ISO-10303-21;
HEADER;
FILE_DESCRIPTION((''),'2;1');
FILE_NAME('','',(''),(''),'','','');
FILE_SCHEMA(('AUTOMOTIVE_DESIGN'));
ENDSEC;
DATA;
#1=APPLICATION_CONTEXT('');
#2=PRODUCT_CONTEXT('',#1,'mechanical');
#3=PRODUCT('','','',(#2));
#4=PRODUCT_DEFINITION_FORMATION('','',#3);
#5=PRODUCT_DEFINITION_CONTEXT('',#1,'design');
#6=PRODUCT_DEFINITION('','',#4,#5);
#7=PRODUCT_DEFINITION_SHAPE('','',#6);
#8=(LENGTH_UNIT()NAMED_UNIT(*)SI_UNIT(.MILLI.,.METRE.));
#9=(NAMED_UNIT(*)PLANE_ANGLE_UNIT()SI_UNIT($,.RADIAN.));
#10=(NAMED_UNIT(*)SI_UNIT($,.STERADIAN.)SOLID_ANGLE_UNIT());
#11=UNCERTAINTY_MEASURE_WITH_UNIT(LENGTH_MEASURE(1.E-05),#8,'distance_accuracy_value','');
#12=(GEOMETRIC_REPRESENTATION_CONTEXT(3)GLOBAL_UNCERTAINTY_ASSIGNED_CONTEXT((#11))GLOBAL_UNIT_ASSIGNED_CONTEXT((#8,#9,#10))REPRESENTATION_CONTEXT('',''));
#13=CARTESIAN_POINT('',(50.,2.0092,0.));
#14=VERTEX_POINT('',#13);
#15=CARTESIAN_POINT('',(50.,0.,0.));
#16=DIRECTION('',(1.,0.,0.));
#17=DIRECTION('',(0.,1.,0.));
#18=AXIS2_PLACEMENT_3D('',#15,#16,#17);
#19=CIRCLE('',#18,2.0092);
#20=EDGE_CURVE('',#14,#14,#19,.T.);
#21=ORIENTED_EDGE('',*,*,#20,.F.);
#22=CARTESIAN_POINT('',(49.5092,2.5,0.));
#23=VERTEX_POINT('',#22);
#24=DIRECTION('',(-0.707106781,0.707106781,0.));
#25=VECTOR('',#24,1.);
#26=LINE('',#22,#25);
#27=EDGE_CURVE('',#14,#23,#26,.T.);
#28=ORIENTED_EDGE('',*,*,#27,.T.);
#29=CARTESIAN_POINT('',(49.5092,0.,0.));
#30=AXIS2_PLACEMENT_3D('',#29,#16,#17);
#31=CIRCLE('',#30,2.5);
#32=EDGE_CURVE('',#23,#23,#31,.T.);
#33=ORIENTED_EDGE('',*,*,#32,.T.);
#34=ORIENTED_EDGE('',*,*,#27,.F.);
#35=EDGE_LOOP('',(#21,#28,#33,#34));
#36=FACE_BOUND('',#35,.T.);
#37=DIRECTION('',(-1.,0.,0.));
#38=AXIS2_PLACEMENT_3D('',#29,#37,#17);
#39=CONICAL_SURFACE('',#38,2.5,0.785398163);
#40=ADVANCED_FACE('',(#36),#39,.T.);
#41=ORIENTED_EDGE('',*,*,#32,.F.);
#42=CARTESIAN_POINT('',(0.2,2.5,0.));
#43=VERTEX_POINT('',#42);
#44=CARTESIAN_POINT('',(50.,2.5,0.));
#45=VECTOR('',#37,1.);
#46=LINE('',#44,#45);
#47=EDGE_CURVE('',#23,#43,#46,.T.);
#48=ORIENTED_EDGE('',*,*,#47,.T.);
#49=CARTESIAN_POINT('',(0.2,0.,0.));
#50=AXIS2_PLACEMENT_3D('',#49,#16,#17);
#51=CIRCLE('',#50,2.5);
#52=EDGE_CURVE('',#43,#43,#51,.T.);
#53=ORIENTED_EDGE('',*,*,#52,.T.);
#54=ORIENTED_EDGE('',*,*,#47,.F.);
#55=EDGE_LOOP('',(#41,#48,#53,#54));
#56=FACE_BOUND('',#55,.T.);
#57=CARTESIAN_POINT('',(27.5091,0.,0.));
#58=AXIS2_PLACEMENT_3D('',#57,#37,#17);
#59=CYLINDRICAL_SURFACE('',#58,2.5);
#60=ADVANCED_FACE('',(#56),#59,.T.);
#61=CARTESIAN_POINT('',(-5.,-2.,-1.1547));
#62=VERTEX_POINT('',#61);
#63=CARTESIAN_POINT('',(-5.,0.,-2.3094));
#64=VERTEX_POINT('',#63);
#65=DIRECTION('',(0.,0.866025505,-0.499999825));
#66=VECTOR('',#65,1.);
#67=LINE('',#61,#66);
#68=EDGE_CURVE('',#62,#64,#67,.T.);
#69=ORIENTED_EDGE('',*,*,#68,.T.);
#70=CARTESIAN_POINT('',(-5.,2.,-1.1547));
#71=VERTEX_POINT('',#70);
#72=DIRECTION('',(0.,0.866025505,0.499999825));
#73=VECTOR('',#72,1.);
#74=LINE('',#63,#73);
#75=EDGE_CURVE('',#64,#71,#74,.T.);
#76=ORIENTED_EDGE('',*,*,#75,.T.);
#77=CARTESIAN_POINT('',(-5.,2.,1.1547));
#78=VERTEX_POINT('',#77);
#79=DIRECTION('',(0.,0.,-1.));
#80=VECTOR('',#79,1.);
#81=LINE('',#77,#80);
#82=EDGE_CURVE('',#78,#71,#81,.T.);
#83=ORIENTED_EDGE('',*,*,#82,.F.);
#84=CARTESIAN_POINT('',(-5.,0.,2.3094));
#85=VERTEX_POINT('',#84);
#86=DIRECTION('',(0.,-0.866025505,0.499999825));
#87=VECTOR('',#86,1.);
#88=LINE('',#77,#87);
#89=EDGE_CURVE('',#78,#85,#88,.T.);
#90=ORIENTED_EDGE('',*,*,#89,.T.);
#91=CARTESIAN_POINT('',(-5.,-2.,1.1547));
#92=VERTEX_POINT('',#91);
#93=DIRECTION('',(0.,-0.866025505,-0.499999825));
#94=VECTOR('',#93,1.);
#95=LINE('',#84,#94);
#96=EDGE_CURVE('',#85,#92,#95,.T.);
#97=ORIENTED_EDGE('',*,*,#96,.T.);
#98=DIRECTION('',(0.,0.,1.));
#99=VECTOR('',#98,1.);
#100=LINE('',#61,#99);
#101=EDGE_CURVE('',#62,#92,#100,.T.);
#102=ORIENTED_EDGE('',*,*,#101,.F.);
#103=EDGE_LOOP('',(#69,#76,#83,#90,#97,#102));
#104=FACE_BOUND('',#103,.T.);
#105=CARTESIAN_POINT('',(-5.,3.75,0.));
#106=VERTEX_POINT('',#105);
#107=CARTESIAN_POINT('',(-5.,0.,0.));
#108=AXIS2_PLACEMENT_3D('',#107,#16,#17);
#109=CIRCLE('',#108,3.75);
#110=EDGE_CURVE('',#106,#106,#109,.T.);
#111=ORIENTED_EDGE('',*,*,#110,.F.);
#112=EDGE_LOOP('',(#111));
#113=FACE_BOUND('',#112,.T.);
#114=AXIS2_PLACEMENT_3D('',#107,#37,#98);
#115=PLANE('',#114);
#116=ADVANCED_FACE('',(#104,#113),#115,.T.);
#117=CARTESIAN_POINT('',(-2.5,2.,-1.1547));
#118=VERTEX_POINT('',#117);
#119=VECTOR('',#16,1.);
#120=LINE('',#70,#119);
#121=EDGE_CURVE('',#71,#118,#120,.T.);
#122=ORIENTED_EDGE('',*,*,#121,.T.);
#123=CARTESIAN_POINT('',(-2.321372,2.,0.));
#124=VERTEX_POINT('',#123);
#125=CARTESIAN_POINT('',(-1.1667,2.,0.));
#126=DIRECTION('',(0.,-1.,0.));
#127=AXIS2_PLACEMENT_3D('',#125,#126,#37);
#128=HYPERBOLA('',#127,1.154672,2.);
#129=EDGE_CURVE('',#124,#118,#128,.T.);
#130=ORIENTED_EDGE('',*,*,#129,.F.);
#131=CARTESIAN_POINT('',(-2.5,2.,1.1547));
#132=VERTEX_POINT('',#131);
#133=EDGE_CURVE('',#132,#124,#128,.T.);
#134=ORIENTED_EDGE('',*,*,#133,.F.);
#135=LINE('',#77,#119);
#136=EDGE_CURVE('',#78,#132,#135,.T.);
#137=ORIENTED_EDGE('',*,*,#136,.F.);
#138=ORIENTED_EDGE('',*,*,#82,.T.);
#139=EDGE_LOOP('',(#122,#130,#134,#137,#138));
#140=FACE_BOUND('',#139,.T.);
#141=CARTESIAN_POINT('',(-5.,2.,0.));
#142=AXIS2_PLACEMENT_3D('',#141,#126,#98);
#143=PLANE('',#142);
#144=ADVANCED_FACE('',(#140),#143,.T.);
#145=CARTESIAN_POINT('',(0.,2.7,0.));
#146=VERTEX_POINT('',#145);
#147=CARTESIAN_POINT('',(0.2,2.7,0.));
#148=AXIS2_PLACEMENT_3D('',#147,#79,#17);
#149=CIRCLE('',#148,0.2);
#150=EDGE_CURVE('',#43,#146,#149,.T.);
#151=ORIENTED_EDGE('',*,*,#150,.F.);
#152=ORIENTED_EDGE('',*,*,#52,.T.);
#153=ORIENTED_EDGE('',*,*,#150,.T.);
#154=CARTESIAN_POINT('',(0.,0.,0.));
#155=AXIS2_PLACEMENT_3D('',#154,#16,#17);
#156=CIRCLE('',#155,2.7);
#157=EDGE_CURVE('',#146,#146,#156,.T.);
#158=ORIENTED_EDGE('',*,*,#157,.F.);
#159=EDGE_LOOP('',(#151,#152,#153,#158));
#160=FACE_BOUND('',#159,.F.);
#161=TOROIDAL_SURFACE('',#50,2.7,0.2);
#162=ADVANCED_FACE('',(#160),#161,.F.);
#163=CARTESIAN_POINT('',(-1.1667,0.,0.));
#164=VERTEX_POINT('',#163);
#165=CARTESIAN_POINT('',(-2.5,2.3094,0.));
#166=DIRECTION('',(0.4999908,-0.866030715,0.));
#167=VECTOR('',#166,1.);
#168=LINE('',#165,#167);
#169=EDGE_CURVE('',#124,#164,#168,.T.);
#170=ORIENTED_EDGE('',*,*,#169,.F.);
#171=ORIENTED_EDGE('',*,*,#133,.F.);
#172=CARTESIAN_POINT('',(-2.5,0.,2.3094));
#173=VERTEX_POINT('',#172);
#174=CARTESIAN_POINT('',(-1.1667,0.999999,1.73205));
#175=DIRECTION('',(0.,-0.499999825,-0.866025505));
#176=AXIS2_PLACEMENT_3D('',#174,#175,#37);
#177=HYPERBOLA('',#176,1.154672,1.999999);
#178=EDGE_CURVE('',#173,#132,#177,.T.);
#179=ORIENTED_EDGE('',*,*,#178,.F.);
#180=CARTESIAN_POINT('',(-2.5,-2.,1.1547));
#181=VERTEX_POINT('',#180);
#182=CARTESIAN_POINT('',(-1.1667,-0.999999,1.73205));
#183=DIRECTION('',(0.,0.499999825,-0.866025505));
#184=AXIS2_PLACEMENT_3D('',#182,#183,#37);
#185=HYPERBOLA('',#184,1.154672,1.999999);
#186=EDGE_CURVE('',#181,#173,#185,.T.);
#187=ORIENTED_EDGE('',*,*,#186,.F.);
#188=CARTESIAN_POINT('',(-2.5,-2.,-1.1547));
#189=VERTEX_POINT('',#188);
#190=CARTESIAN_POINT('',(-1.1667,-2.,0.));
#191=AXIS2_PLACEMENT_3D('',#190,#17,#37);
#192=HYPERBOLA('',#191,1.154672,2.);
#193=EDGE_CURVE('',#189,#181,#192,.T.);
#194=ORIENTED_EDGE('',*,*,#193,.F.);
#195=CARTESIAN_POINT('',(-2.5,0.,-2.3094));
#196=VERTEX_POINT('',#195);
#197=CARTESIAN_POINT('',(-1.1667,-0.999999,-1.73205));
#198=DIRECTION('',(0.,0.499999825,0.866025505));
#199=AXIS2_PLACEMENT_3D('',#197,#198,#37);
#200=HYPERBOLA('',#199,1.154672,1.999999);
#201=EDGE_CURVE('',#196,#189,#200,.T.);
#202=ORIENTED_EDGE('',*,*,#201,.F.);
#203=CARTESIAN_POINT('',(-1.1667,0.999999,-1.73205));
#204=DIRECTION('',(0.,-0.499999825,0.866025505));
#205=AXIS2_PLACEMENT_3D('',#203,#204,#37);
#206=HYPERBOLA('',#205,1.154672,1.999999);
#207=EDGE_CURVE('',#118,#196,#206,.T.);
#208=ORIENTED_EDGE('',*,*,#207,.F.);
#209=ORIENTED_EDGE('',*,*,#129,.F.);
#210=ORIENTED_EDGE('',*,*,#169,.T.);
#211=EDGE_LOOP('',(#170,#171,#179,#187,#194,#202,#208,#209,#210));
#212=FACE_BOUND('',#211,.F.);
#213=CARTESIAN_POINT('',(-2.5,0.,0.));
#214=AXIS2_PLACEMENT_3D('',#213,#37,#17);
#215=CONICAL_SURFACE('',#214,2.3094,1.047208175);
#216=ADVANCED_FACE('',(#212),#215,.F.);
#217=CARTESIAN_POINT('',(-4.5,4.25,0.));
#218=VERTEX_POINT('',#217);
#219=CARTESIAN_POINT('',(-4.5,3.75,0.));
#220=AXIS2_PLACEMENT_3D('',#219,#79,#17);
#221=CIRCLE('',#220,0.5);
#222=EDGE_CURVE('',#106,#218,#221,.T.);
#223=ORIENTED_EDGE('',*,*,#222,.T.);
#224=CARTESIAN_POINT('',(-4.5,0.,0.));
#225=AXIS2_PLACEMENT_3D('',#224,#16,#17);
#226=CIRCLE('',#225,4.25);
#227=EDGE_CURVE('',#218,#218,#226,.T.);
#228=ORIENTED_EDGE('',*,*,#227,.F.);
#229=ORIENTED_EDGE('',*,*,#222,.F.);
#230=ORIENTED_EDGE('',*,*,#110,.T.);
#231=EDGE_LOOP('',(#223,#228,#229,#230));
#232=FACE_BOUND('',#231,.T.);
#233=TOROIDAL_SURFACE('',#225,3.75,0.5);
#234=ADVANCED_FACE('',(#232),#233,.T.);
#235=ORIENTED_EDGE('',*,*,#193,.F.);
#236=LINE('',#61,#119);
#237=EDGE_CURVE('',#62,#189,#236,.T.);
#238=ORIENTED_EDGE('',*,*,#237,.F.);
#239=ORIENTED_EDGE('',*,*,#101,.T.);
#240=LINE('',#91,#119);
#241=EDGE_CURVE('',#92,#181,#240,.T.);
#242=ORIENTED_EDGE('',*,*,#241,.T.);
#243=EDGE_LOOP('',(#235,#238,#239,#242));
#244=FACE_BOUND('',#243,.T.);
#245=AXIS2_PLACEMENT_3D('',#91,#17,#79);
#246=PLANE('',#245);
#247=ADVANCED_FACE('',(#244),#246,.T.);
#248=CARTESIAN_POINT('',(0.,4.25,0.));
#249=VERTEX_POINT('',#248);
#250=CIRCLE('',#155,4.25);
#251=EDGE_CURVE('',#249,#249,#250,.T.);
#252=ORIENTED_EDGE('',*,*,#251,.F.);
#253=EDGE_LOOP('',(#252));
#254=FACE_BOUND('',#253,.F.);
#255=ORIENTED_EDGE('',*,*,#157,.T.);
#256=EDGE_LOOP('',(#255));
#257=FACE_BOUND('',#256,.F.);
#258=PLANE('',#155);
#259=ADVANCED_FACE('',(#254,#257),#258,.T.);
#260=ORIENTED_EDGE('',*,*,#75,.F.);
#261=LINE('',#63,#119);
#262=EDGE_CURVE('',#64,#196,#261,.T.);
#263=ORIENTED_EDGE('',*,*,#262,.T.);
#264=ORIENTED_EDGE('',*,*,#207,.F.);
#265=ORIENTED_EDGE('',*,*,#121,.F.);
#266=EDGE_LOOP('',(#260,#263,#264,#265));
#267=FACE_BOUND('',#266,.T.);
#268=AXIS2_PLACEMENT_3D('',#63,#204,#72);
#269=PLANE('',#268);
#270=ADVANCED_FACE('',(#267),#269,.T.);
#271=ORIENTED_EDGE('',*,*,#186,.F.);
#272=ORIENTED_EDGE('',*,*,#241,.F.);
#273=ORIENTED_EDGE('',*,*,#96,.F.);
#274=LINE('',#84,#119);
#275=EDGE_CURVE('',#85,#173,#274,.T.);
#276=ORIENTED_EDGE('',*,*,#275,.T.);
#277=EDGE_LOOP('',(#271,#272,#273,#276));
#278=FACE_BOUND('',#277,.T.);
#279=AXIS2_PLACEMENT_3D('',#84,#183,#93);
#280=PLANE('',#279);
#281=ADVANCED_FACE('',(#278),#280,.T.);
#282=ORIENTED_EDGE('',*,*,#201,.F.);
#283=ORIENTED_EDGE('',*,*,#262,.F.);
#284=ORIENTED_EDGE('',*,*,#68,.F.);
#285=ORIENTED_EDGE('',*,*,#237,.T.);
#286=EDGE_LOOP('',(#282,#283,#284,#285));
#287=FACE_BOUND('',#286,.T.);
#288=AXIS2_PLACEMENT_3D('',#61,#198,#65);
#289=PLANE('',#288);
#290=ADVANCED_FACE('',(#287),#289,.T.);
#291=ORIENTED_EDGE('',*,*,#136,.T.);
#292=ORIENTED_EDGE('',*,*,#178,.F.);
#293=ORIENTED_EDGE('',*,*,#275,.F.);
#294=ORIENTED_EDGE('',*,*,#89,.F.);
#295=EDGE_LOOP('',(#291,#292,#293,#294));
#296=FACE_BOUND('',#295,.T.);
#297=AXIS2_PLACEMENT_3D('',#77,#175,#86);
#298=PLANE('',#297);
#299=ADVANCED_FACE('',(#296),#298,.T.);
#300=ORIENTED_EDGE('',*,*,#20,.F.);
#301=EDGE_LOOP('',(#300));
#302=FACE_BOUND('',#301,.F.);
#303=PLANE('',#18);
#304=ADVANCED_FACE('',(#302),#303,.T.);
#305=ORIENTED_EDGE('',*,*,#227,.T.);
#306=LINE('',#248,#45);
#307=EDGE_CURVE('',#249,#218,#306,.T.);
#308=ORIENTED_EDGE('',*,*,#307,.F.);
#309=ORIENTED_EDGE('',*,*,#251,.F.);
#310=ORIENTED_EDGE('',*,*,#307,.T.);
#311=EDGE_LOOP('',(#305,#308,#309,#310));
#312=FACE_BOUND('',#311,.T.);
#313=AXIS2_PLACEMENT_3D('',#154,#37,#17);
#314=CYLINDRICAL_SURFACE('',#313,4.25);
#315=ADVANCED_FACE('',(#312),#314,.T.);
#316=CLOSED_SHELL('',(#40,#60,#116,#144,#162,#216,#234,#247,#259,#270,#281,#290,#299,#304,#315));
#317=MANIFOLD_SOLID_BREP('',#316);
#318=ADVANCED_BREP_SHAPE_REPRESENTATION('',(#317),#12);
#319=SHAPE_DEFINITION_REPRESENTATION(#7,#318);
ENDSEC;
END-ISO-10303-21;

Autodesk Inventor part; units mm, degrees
ref_plane "YZ Plane" through (0, 0, 0) normal (1, 0, 0) x (0, 1, 0)
ref_plane "XZ Plane" through (0, 0, 0) normal (0, 1, 0) x (-1, 0, 0)
sketch "Sketch1" plane through (0, 0, 0) normal (0, 0, 1) x (1, 0, 0)
  line L0 (-1.1667, 0) -> (50, 0)
  line L1 (50, 0) -> (50, 2.5)
  line L2 (50, 2.5) -> (28, 2.5)
  line L3 (28, 2.5) -> (27.5091, 2.5)
  line L4 (27.5091, 2.5) -> (0, 2.5)
  line L5 (0, 2.5) -> (0, 4.25)
  line L6 (0, 4.25) -> (-5, 4.25)
  line L7 (-5, 4.25) -> (-5, 2.3094)
  line L8 (-5, 2.3094) -> (-2.5, 2.3094)
  line L9 (-2.5, 2.3094) -> (-1.1667, 0)
  line L10 (-16, 0) -> (61, 0) projected
  line L11 (0, -0.85) -> (0, 5.1) projected
  line L12 (28, 2.5) -> (0, 2.5) construction
  dimension "d1" = 22
  dimension "d2" = 0.4909
  dimension "d3" = 5
  dimension "d4" = 2.5
  dimension "d5" = 60
  dimension "d6" = 5
  dimension "d7" = 5
  dimension "d8" = 4.6188
  dimension "d9" = 8.5
  dimension "d26" = 50
revolve "Body" add sketch "Sketch1" angle 360 about axis through (-1.1667, 0, 0) along (1, 0, 0)
sketch "Sketch2" plane through (-5, 0, 0) normal (-1, 0, 0) x (0, 0, 1)
  circle A0 centre (0, 0) radius 2.3094 projected
  line L0 (0, -5.95) -> (0, 5.95) projected
  line L1 (-5.95, 0) -> (5.95, 0) projected
  line L2 (2.3094, 0) -> (1.1547, -2)
  line L3 (1.1547, -2) -> (-1.1547, -2)
  line L4 (-1.1547, -2) -> (-2.3094, 0)
  line L5 (-2.3094, 0) -> (-1.1547, 2)
  line L6 (-1.1547, 2) -> (1.1547, 2)
  line L7 (1.1547, 2) -> (2.3094, 0)
extrude "Slot" add sketch "Sketch2" against normal up to next contours L7 A0 | A0 L2 | L6 L0 A0 | A0 L0 L3 | L0 L6 A0 | A0 L3 L0 | L4 A0 | A0 L5
fillet "Fillet1" radius 0.5 1 edges at (-5, -4.25, 0)
thread "Thread" size "M5x0.8" class "6g" standard "ISO Metric profile" length 22
chamfer "Chamfer1" distance 0.4908 distance2 0.4908 1 edges at (50, -2.5, 0) measured on face at (50, -0.1004, 0.8273)
ref_plane "Work Plane1" through (29, 0, 0) normal (0, -1, 0) x (1, 0, 0)
fillet "Fillet2" radius 0.2 1 edges at (0, -2.5, 0)
equation "\"d30\" = R"
equation "\"d17\" = RR"
equation "\"d13\" = GEL"
equation "\"d15\" = -0.5 * SPD + 0.5 * GD"
equation "\"d16\" = GUL"
equation "\"d1\" = GEL"
equation "\"d3\" = KOH"
equation "\"d4\" = INTI"
equation "\"d6\" = GD"
equation "\"d7\" = BDM"
equation "\"d8\" = 1.1547 * SW"
equation "\"d9\" = KOD"
equation "\"d26\" = NLG"
equation "\"GD\" = NND"
equation "\"NLG\" = 50"
equation "\"GEL\" = 22"
equation "\"KOD\" = 8.5"
equation "\"KOH\" = 5"
equation "\"INTI\" = 2.5"
equation "\"GAL\" = 0.61345 * PTC"
equation "\"GUL\" = 0.61345 * PTC"
equation "\"BDM\" = NND"
equation "\"SW\" = 4"
equation "\"RR\" = 0.5"
equation "\"SPD\" = NND - 1.2269 * PTC"
equation "\"R\" = 0.2"
equation "\"TOA\" = 30deg"
equation "\"GD1\" = THREADDIA - 1.2269 * PTC"
equation "\"THREADDIA\" = 5"
equation "\"FAWI\" = 45deg"
equation "\"ANG\" = 120deg"
equation "\"PTC\" = 0.8"
equation "\"NND\" = 5"
equation "\"E0\" = 1.155 * SW"
properties part number "DIN 912 - M5 x 50" material "Steel, Mild"
